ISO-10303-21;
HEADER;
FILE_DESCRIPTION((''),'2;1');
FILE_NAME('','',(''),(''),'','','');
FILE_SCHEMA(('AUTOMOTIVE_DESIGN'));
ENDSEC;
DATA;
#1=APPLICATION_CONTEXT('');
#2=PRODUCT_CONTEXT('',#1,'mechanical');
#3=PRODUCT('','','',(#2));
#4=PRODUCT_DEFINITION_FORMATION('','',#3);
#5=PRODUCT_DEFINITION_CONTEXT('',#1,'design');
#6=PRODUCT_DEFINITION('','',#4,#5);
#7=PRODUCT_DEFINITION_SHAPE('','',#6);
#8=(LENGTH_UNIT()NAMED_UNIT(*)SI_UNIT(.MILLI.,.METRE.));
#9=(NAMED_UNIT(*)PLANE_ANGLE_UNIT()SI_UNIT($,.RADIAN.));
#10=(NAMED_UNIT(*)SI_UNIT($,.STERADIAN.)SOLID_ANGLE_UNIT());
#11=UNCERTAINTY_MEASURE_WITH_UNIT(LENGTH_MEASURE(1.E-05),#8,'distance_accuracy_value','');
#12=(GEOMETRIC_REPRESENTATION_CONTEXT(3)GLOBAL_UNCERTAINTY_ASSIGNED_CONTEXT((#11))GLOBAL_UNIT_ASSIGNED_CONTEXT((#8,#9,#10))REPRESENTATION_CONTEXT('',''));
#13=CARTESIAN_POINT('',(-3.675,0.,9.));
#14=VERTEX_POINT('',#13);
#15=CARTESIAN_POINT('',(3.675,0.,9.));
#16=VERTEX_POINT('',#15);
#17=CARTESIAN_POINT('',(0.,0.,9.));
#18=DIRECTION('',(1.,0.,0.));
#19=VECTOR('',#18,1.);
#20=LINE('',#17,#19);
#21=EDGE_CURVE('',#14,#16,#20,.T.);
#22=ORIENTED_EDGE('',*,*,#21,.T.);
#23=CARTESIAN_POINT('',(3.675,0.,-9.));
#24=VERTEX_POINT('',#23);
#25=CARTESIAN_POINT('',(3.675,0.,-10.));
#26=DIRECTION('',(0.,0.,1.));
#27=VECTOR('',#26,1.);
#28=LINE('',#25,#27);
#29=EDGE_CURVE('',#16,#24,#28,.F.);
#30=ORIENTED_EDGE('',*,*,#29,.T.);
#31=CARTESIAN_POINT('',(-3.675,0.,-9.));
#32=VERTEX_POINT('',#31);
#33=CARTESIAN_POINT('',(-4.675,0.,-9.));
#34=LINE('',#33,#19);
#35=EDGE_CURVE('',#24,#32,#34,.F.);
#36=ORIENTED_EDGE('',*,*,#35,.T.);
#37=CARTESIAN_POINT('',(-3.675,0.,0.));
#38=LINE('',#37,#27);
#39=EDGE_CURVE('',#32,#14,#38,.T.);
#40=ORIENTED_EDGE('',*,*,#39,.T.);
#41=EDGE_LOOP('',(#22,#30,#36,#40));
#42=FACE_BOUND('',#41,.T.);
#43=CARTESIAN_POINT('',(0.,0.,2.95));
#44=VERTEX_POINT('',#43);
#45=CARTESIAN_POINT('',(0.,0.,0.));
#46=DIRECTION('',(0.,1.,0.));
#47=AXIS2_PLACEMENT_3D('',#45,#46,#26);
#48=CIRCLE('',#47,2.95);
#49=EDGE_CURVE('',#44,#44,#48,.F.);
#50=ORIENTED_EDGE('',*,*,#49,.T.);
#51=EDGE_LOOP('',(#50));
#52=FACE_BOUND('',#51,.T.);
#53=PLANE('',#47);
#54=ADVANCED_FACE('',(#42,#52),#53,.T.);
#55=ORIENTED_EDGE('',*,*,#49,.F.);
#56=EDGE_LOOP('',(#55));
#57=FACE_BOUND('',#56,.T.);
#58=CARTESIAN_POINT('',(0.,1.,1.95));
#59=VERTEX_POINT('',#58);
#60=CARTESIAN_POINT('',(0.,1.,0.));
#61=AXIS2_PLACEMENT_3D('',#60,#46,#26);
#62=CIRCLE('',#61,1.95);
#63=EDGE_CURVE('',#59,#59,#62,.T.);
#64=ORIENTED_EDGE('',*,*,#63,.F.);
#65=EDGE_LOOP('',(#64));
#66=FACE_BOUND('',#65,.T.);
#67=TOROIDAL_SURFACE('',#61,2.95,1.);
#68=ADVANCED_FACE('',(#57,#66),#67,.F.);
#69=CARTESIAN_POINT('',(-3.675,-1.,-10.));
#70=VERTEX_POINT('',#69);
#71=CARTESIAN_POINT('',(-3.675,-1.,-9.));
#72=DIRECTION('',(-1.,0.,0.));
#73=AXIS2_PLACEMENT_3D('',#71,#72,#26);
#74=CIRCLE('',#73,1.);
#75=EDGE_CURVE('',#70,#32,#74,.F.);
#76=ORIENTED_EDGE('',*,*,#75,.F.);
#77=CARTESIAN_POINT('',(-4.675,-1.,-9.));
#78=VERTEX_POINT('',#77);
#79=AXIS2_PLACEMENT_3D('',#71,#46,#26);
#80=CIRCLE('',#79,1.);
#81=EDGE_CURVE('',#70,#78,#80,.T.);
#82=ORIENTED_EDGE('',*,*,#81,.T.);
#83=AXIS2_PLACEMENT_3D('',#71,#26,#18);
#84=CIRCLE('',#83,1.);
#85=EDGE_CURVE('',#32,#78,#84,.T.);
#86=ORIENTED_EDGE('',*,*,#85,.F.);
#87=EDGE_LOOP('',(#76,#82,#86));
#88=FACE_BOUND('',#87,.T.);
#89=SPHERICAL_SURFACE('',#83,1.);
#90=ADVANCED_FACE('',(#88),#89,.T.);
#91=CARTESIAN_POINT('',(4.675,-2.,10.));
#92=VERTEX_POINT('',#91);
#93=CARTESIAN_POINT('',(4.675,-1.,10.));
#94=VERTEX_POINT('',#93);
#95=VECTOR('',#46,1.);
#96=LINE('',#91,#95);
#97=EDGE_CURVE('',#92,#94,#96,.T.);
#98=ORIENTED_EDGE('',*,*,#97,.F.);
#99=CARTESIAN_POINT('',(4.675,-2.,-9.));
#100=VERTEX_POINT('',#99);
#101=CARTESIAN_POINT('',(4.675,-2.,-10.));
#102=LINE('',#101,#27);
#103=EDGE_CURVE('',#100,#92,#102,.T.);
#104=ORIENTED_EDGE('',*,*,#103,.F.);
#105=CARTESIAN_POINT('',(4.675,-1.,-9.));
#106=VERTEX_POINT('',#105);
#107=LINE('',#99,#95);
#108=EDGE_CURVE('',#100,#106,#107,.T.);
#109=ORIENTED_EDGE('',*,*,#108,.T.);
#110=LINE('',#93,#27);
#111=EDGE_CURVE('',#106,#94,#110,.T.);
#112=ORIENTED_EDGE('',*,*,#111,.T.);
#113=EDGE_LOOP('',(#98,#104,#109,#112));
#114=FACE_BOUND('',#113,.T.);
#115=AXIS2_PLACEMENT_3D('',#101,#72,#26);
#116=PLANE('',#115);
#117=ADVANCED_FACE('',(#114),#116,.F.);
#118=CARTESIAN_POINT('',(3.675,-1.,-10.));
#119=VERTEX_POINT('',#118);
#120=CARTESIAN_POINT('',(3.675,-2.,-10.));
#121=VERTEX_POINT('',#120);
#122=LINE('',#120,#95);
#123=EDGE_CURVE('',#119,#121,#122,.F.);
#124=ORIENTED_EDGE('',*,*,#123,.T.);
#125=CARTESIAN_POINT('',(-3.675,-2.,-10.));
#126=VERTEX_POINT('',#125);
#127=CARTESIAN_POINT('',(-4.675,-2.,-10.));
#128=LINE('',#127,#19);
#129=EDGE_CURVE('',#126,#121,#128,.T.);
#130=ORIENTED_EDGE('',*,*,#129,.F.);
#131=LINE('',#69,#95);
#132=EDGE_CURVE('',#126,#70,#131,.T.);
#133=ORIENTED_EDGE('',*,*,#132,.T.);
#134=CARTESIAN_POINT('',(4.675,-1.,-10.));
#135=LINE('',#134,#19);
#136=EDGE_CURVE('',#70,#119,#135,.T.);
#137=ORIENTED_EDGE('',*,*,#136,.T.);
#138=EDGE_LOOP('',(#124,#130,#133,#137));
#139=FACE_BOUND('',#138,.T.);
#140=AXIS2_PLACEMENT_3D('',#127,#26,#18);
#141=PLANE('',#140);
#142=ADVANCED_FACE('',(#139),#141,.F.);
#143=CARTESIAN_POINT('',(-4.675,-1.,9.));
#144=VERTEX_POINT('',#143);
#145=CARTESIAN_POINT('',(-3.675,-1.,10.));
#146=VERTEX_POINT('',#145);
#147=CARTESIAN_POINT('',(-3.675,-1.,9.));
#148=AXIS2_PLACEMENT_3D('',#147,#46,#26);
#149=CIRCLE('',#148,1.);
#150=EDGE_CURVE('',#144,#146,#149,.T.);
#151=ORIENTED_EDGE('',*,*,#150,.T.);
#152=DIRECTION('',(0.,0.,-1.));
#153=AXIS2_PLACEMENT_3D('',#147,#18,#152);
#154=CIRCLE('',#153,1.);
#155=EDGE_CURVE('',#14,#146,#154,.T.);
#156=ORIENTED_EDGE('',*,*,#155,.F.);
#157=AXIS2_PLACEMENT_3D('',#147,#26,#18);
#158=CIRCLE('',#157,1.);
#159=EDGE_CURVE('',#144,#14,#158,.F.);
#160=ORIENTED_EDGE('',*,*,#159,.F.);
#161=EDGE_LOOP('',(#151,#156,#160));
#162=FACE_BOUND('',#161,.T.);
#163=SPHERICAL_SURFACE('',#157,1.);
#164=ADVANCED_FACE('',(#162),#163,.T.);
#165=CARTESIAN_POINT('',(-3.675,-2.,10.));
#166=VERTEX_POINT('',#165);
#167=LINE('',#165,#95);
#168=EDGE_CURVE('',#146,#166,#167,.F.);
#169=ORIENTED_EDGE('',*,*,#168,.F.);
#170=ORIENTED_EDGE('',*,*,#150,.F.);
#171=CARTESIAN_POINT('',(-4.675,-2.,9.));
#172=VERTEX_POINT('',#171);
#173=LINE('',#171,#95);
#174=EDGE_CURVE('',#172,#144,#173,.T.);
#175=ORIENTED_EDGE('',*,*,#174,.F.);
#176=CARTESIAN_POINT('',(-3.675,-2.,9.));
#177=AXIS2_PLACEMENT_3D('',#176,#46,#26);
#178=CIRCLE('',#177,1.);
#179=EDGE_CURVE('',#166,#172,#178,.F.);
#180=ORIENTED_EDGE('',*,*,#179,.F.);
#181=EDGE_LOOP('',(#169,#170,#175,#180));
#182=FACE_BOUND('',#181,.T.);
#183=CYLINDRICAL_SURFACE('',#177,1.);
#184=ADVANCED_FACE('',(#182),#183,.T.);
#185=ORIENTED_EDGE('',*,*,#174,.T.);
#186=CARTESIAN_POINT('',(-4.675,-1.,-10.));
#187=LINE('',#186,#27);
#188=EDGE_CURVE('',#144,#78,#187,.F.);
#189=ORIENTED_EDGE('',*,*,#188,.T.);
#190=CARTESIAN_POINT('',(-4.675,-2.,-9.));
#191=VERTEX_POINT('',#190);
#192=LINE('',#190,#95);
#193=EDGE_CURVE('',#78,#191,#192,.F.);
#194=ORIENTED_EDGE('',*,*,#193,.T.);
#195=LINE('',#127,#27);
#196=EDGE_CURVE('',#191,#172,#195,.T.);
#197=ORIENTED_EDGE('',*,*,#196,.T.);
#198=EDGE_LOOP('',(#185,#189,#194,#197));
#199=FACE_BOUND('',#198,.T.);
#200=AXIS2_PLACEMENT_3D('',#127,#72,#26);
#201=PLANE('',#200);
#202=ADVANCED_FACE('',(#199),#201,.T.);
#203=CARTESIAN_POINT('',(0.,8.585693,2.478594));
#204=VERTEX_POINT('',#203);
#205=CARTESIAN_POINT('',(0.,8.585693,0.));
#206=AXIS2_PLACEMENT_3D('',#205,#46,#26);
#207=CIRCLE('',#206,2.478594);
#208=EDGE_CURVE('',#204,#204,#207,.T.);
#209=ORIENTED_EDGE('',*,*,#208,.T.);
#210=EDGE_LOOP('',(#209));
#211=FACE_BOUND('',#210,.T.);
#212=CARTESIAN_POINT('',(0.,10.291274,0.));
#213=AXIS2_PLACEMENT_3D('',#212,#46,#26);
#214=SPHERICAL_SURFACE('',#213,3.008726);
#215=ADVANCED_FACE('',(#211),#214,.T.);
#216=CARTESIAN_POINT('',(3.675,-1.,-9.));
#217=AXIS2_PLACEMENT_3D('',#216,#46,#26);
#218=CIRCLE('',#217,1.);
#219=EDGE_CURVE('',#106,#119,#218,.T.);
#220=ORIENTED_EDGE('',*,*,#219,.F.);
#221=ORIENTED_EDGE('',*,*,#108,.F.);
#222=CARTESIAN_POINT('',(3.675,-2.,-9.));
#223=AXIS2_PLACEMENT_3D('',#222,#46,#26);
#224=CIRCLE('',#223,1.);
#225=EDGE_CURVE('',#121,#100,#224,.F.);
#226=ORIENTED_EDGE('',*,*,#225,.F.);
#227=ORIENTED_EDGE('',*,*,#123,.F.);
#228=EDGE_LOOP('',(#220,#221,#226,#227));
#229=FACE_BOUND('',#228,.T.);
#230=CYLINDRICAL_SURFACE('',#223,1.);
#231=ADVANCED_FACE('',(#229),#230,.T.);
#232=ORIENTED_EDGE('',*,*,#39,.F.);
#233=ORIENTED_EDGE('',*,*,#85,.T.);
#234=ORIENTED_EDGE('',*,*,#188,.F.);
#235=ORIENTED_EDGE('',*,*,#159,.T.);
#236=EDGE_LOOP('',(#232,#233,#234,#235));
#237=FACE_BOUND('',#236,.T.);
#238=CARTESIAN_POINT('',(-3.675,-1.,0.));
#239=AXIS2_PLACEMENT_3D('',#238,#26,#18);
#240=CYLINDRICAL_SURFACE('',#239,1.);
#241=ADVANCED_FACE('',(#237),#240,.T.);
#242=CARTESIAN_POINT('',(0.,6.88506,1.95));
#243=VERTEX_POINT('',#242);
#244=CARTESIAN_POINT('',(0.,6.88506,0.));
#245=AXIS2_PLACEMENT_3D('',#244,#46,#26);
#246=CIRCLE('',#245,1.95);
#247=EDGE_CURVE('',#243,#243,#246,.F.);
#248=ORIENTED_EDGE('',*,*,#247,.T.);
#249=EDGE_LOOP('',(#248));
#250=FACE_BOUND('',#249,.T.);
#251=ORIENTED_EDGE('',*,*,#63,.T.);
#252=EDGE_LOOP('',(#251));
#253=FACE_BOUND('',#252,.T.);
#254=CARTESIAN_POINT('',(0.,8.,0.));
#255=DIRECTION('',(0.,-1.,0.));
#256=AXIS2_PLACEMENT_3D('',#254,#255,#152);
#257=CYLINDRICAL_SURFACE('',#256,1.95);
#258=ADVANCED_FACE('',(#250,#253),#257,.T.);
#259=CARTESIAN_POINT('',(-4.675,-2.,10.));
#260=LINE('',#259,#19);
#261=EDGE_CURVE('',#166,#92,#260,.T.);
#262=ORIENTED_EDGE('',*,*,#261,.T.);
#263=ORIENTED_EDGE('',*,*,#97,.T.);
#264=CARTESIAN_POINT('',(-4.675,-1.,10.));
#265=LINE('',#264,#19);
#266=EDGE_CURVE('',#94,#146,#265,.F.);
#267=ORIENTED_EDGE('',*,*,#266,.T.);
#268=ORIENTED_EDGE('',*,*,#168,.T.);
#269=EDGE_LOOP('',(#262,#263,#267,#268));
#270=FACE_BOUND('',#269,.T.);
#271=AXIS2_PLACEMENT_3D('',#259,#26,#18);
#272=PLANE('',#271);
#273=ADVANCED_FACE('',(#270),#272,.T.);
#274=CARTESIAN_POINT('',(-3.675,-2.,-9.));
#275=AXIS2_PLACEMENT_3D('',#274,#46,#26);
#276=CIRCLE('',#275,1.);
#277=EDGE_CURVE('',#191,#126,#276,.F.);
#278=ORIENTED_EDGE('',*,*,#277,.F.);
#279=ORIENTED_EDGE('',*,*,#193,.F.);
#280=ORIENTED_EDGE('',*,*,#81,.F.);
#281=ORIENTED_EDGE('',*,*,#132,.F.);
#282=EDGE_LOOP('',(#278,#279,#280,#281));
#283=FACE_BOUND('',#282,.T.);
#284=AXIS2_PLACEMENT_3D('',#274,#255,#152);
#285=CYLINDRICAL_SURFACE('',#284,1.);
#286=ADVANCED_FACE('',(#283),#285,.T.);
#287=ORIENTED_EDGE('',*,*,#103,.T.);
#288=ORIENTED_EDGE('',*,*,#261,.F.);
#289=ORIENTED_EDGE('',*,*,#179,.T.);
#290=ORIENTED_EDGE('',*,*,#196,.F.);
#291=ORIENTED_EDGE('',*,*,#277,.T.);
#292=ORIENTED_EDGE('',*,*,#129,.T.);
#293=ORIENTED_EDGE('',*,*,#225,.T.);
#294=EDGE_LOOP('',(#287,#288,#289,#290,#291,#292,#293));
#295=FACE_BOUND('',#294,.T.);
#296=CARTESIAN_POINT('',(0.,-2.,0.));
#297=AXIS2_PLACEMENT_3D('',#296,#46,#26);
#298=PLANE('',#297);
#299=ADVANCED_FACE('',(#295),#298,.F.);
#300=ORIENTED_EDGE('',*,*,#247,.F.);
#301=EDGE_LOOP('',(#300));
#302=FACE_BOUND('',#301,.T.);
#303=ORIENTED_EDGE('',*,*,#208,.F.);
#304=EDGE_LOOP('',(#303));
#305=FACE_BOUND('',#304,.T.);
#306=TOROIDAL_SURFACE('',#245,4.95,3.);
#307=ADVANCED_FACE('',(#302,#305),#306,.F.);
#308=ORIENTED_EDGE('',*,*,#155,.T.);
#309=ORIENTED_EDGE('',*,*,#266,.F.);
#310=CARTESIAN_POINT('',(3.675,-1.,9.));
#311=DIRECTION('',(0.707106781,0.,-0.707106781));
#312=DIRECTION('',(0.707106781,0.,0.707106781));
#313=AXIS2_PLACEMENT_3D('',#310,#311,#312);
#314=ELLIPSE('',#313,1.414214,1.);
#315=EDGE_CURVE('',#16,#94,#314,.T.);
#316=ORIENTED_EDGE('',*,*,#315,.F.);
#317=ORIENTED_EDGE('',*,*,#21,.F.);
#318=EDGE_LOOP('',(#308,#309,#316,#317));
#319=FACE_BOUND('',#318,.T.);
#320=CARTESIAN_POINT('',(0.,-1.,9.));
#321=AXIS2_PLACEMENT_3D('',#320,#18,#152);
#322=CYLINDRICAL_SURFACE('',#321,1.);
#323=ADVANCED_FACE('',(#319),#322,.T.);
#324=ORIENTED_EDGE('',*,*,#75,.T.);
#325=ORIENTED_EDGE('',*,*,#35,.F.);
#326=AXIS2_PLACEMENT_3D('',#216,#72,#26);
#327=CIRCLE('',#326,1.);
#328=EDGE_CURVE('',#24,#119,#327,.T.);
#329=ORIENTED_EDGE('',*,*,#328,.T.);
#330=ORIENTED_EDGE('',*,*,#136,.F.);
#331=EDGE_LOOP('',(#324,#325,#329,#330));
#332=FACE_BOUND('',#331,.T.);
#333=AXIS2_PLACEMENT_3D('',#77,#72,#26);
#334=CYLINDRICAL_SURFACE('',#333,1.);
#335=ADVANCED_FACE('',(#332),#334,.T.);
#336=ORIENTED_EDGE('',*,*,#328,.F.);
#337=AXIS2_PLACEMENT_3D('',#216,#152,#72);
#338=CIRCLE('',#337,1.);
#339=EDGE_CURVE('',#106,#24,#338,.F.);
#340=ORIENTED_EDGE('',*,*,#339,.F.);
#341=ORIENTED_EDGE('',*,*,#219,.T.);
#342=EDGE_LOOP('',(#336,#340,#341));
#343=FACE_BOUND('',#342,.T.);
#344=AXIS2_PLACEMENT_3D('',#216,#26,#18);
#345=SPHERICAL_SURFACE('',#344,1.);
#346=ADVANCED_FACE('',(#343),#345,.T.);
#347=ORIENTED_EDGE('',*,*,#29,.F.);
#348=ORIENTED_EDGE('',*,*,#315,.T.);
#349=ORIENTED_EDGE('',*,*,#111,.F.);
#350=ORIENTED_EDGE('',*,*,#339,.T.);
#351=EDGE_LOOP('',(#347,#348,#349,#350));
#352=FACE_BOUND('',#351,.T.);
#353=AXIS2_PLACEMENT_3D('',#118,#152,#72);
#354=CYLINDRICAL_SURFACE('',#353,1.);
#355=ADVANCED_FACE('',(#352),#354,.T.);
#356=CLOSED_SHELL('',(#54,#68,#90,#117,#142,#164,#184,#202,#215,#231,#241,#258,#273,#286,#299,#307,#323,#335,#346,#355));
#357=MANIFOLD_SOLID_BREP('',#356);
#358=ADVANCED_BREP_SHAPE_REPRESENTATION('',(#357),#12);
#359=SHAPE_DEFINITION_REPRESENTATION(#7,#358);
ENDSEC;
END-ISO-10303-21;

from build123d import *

# Parameters (mm, degrees)
CROQUIS2_R              = 1.95
SALIENTE_EXTRUIR1_DEPTH = 8
C_PULA1_FACE_RADIUS     = 1.95
C_PULA1_HEIGHT          = 5.3
CROQUIS11_W             = 9.35
CROQUIS11_H             = 20
SALIENTE_EXTRUIR3_DEPTH = 2
FILLET1_R               = 1
FILLET2_R               = 1
FILLET3_R               = 3


with BuildPart() as part:
    # Croquis2 → Saliente-Extruir1 (new body)
    with BuildSketch(Plane(origin=(0, 0, 0), x_dir=(1, 0, 0), z_dir=(0, 1, 0))):
        with Locations(Location((0, 0, 0), (0, 0, 270))):
            Circle(CROQUIS2_R)
    extrude(amount=SALIENTE_EXTRUIR1_DEPTH)

    # Cúpula1: a dome of height H over a round flat face of radius A is a cap of a sphere of radius (A * A + H * H) / (2 * H)
    c_pula1_r = (C_PULA1_FACE_RADIUS * C_PULA1_FACE_RADIUS + C_PULA1_HEIGHT * C_PULA1_HEIGHT) / (2 * C_PULA1_HEIGHT)
    c_pula1_base = Plane((0, 8, 0), z_dir=(0, 1, 0))
    with Locations(c_pula1_base.offset(C_PULA1_HEIGHT - c_pula1_r)):
        c_pula1_ball = Sphere(c_pula1_r, mode=Mode.PRIVATE)
    add(split(c_pula1_ball, bisect_by=c_pula1_base, keep=Keep.TOP, mode=Mode.PRIVATE))

    # Croquis11 → Saliente-Extruir3 (add)
    with BuildSketch(Plane(origin=(0, 0, 0), x_dir=(-1, 0, 0), z_dir=(0, -1, 0))):
        Rectangle(CROQUIS11_W, CROQUIS11_H)
    extrude(amount=SALIENTE_EXTRUIR3_DEPTH)

    # Fillet1
    fillet1_edges = [part.edges().sort_by_distance(p)[0] for p in [
        (0, 0, -1.95),
        (0, 0, -10),
        (4.675, 0, 0),
        (-4.675, 0, 0),
        (0, 0, 10),
    ]]
    fillet(fillet1_edges, radius=FILLET1_R)

    # Fillet2
    # the kernel refuses this fillet: 1 mm, written as the material it takes off along each edge
    with BuildSketch(Plane(origin=(-3.675, -1, 9), x_dir=(0, 0, 1), z_dir=(-1, 0, 0))) as fillet2_piece_1_section:
        Polygon((0, 0), (FILLET2_R, 0), (FILLET2_R, FILLET2_R), (0, FILLET2_R), align=None)
    fillet2_piece_1 = extrude(amount=FILLET2_R, mode=Mode.PRIVATE)
    fillet2_piece_1 = fillet2_piece_1 - Plane(origin=(-3.675, -1, 9), x_dir=(0, -0.7071067811865475, -0.7071067811865475), z_dir=(-1, 0, 0)) * Sphere(FILLET2_R, mode=Mode.PRIVATE)
    add(fillet2_piece_1, mode=Mode.SUBTRACT)
    with BuildSketch(Plane(origin=(-3.675, -1, -9), x_dir=(-1, 0, 0), z_dir=(0, 0, -1))) as fillet2_piece_2_section:
        Polygon((0, 0), (FILLET2_R, 0), (FILLET2_R, FILLET2_R), (0, FILLET2_R), align=None)
    fillet2_piece_2 = extrude(amount=FILLET2_R, mode=Mode.PRIVATE)
    fillet2_piece_2 = fillet2_piece_2 - Plane(origin=(-3.675, -1, -9), x_dir=(0.7071067811865475, -0.7071067811865475, 0), z_dir=(0, 0, -1)) * Sphere(FILLET2_R, mode=Mode.PRIVATE)
    add(fillet2_piece_2, mode=Mode.SUBTRACT)
    with BuildSketch(Plane(origin=(3.675, -1, -9), x_dir=(1, 0, 0), z_dir=(0, 0, -1))) as fillet2_piece_3_section:
        Polygon((0, 0), (FILLET2_R, 0), (FILLET2_R, -FILLET2_R), (0, -FILLET2_R), align=None)
    fillet2_piece_3 = extrude(amount=FILLET2_R, mode=Mode.PRIVATE)
    fillet2_piece_3 = fillet2_piece_3 - Plane(origin=(3.675, -1, -9), x_dir=(-0.7071067811865475, -0.7071067811865475, 0), z_dir=(0, 0, -1)) * Sphere(FILLET2_R, mode=Mode.PRIVATE)
    add(fillet2_piece_3, mode=Mode.SUBTRACT)
    with BuildSketch(Plane(origin=(-4.675, -1, 10), x_dir=(0, 0, -1), z_dir=(0, -1, 0)), Plane(origin=(-4.675, -1, -10), x_dir=(1, 0, 0), z_dir=(0, -1, 0))) as fillet2_piece_4:
        with BuildLine():
            CenterArc((FILLET2_R, FILLET2_R), FILLET2_R, 180, 90)
            Line((0, FILLET2_R), (0, 0))
            Line((0, 0), (FILLET2_R, 0))
        make_face()
    extrude(amount=3.5, mode=Mode.SUBTRACT)
    with BuildSketch(Plane(origin=(4.675, -1, -10), x_dir=(-1, 0, 0), z_dir=(0, -1, 0))) as fillet2_piece_5:
        with BuildLine():
            CenterArc((FILLET2_R, -FILLET2_R), FILLET2_R, 90, 90)
            Line((0, -FILLET2_R), (0, 0))
            Line((0, 0), (FILLET2_R, 0))
        make_face()
    extrude(amount=3.5, mode=Mode.SUBTRACT)

    # Fillet3
    fillet3_edges = [part.edges().sort_by_distance(p)[0] for p in [
        (0, 8, -1.95),
    ]]
    fillet(fillet3_edges, radius=FILLET3_R)


solid = part.part
